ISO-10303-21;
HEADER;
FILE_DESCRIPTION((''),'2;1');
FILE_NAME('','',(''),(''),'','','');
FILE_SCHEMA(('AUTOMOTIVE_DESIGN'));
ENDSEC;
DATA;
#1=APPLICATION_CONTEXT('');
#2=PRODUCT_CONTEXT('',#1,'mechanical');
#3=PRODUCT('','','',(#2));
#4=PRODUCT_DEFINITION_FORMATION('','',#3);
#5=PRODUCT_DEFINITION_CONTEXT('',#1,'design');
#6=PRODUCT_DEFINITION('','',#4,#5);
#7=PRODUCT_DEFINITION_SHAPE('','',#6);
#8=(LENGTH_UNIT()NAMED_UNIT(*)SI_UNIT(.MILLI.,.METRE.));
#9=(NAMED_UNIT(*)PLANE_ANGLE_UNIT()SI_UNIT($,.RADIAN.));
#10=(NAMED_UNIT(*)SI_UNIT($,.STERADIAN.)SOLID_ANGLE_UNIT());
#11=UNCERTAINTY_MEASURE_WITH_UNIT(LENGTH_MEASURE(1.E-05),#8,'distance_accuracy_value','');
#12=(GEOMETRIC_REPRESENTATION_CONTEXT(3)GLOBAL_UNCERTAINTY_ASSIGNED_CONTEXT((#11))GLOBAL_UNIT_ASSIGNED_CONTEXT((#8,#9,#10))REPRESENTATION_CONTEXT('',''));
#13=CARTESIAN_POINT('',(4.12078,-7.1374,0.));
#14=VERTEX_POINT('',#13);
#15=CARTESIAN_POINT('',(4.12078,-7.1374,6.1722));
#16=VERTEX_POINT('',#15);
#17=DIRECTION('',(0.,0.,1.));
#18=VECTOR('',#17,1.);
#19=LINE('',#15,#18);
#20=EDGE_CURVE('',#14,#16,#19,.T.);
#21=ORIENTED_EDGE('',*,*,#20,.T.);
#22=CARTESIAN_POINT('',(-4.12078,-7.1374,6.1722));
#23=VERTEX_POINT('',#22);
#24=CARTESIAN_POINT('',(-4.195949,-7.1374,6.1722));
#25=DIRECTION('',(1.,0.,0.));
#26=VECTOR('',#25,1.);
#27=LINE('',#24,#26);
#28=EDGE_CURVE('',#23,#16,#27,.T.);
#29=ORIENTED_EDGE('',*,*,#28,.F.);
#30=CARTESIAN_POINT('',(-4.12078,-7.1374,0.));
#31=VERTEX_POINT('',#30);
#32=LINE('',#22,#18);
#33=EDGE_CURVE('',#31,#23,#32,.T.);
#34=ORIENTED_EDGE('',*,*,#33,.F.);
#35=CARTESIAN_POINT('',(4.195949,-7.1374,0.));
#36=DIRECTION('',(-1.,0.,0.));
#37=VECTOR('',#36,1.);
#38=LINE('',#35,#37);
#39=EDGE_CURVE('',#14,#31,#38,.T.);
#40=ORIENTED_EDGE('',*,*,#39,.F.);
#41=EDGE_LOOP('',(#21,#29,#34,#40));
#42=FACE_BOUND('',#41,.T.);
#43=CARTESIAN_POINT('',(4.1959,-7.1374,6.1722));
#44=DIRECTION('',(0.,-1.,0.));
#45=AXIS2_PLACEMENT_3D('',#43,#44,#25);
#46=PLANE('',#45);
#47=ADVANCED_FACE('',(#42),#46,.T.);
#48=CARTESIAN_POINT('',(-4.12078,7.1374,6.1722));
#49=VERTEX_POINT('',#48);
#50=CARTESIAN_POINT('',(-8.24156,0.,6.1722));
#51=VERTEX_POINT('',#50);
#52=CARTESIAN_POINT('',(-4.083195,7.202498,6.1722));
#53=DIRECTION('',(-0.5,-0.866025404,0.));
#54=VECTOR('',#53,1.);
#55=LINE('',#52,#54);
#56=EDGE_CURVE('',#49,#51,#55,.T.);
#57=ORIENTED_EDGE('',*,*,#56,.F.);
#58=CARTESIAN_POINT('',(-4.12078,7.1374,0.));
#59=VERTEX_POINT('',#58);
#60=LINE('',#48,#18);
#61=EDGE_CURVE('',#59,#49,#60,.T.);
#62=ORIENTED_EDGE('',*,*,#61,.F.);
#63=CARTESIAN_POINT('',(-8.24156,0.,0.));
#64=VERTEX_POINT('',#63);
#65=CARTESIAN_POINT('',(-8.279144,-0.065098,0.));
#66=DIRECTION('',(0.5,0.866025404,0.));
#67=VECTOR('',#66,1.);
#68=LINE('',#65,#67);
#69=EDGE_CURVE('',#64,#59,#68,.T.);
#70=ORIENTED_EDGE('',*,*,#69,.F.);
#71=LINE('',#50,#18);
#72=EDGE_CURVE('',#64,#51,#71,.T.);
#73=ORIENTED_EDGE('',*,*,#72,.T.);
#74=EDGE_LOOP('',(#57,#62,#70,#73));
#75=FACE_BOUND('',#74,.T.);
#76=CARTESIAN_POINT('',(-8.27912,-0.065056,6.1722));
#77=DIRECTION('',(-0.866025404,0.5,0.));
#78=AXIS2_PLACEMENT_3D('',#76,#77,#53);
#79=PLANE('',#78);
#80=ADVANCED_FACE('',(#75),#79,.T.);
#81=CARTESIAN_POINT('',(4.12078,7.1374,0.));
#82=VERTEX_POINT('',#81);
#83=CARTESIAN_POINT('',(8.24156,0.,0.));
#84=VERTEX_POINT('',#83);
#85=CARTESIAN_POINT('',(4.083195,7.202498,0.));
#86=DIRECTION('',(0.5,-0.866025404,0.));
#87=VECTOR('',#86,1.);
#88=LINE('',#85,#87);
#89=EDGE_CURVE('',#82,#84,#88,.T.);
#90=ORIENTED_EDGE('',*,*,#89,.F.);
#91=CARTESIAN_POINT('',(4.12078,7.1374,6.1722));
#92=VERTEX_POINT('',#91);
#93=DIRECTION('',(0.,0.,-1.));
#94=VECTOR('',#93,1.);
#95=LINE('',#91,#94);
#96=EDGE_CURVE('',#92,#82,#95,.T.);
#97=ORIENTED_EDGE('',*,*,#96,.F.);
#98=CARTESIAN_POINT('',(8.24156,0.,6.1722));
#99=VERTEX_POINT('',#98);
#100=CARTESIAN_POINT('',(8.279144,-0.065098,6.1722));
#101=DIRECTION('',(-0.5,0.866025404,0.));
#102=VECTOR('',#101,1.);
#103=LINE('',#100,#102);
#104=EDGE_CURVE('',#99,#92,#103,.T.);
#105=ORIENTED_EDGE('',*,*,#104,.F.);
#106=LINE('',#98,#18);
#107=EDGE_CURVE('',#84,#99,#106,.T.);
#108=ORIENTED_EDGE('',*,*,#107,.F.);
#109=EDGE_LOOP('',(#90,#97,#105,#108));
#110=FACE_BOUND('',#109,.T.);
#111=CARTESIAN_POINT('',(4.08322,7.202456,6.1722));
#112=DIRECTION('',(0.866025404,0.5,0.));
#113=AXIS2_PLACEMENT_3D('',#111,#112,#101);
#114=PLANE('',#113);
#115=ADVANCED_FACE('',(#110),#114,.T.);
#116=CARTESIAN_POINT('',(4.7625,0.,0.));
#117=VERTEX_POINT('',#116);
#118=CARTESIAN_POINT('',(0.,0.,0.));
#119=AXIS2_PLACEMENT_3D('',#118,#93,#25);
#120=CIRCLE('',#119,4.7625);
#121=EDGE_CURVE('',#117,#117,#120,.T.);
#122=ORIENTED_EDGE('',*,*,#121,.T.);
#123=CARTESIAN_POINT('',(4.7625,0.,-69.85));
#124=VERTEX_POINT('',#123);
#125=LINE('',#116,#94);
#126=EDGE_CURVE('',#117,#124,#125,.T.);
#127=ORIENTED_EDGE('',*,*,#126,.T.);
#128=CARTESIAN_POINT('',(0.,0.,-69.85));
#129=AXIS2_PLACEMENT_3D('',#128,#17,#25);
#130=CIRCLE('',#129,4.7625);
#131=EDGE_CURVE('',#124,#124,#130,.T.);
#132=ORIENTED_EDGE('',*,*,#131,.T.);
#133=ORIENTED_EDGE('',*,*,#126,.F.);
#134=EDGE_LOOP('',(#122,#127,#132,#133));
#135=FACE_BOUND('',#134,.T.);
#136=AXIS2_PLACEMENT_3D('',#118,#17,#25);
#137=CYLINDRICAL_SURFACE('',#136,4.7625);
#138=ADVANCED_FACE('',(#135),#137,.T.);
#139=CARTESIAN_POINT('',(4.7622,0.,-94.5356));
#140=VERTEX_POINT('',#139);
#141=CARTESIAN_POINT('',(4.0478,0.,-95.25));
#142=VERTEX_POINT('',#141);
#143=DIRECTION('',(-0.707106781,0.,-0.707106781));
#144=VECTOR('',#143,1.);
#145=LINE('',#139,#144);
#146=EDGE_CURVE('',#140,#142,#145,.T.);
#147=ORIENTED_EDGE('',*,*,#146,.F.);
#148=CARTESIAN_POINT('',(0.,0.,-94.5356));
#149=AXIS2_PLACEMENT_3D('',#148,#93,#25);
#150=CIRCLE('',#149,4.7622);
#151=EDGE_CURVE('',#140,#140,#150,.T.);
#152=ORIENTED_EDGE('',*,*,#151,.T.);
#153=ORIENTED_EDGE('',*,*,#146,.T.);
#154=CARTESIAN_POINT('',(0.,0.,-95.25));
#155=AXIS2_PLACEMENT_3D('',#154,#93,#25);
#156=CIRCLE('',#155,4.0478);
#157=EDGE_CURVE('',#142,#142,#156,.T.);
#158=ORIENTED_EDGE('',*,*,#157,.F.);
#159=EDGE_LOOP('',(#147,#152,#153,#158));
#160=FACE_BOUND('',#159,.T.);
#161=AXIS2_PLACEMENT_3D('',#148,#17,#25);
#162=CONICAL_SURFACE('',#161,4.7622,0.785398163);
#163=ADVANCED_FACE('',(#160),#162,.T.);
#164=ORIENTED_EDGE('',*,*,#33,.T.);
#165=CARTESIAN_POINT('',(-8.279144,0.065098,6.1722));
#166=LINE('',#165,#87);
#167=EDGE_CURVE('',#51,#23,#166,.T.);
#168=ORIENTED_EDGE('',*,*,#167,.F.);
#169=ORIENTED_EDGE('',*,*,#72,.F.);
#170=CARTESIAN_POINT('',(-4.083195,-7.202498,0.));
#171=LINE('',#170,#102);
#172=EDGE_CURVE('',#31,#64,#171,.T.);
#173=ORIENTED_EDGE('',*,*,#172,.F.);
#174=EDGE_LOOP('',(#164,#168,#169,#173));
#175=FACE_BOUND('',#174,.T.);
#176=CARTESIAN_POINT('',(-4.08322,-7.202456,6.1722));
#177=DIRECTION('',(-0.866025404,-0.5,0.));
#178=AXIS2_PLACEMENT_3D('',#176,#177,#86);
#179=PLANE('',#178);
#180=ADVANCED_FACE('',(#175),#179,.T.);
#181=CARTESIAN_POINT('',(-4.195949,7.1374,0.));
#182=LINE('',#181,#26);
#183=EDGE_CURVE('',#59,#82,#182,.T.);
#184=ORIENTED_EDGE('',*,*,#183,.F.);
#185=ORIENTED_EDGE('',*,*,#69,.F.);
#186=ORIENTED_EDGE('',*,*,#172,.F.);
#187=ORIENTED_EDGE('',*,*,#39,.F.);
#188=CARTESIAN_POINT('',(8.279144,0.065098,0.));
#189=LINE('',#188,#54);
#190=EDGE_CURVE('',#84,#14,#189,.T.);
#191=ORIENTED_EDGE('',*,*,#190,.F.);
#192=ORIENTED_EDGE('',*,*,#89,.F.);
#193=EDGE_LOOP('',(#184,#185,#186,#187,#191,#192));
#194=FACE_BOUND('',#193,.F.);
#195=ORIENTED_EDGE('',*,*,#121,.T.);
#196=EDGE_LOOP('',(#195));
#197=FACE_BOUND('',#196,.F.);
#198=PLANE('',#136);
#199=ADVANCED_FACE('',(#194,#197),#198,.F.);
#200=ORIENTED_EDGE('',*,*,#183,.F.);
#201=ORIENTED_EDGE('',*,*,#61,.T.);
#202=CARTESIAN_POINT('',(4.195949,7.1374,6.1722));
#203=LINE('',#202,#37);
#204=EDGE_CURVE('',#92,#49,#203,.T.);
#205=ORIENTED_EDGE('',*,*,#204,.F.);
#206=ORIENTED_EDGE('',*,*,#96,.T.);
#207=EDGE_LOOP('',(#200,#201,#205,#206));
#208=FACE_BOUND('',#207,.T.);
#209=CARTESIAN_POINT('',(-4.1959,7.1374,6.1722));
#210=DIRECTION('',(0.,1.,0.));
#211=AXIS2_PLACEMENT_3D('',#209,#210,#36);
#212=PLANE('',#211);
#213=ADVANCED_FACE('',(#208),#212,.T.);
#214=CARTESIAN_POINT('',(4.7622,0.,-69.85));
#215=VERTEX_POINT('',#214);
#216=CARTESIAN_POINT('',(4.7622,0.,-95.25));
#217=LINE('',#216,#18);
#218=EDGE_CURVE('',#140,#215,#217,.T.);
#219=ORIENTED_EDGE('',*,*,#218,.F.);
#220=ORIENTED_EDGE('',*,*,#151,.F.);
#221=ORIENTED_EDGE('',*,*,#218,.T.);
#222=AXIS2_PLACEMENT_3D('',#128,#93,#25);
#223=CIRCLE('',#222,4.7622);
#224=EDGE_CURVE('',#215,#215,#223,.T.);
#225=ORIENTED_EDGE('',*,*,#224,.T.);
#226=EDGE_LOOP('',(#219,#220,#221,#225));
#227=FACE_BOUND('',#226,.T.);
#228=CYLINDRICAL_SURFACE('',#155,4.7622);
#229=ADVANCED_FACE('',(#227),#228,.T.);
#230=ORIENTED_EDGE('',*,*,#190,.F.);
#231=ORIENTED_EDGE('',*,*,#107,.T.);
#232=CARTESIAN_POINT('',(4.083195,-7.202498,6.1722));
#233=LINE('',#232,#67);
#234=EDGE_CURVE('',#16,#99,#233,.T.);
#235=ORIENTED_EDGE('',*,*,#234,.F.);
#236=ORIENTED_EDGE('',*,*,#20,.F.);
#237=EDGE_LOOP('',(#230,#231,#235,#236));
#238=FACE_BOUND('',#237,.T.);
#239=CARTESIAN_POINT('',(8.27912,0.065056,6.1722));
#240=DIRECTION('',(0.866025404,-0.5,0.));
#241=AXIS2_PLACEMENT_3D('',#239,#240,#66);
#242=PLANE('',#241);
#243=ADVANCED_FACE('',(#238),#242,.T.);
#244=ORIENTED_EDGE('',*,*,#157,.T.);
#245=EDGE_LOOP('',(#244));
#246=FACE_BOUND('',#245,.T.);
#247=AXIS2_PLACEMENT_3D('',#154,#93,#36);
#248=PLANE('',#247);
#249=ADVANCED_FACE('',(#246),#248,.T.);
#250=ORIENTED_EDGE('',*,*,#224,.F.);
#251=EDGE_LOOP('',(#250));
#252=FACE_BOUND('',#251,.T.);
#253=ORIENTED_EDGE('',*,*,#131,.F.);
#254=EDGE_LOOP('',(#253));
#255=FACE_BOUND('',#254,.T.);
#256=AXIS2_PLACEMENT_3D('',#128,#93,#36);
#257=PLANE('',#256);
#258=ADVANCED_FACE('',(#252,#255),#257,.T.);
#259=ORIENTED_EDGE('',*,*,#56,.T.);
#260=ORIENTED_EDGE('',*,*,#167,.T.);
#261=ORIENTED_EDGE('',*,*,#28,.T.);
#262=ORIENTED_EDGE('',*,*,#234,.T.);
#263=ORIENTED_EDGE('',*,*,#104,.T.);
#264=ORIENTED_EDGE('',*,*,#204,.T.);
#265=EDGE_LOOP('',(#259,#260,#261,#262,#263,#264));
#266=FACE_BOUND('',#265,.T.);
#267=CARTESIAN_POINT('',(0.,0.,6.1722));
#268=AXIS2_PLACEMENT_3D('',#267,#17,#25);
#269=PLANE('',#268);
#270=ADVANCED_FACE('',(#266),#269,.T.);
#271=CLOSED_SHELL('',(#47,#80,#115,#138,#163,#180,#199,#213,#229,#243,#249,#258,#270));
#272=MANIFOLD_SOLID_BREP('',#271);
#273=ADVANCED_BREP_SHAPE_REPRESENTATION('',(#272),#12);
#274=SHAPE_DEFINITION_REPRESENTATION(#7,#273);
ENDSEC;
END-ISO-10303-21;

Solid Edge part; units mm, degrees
sketch "Sketch1" plane through (0, 0, 0) normal (0, 0, 1) x (1, 0, 0)
  circle A0 centre (0, 0) radius 8.2794
  dimension "D1" = 16.5588
extrude "Protrusion1" add sketch "Sketch1" along normal blind 6.1722
sketch "Sketch2" plane through (0, 0, 0) normal (0, 0, -1) x (1, 0, 0)
  circle A0 centre (0, 0) radius 4.7625
extrude "Protrusion2" add sketch "Sketch2" along normal blind 95.25
sketch "Sketch3" plane through (0, 0, -95.25) normal (0, 0, -1) x (1, 0, 0)
  circle A0 centre (0, 0) radius 4.7622
extrude "Cutout1" cut sketch "Sketch3" against normal blind 25.4 flip side to cut
chamfer "Chamfer_1" distance 0.7144 angle 45 1 edges at (-4.7622, 0, -95.25)
sketch "Sketch4" plane through (0, 0, 6.1722) normal (0, 0, 1) x (1, 0, 0)
  line L0 (-4.1959, 7.1374) -> (4.1959, 7.1374)
  dimension "D1" = 14.2748
extrude "Cutout2" cut sketch "Sketch4" against normal up to next material side at (0, 7.1874, 6.1722)
pattern_circular "Pattern1" count 6 over 360 about axis through (0, 0, 6.1722) along (0, 0, 1) of "Cutout2"
properties part number "24100086"
